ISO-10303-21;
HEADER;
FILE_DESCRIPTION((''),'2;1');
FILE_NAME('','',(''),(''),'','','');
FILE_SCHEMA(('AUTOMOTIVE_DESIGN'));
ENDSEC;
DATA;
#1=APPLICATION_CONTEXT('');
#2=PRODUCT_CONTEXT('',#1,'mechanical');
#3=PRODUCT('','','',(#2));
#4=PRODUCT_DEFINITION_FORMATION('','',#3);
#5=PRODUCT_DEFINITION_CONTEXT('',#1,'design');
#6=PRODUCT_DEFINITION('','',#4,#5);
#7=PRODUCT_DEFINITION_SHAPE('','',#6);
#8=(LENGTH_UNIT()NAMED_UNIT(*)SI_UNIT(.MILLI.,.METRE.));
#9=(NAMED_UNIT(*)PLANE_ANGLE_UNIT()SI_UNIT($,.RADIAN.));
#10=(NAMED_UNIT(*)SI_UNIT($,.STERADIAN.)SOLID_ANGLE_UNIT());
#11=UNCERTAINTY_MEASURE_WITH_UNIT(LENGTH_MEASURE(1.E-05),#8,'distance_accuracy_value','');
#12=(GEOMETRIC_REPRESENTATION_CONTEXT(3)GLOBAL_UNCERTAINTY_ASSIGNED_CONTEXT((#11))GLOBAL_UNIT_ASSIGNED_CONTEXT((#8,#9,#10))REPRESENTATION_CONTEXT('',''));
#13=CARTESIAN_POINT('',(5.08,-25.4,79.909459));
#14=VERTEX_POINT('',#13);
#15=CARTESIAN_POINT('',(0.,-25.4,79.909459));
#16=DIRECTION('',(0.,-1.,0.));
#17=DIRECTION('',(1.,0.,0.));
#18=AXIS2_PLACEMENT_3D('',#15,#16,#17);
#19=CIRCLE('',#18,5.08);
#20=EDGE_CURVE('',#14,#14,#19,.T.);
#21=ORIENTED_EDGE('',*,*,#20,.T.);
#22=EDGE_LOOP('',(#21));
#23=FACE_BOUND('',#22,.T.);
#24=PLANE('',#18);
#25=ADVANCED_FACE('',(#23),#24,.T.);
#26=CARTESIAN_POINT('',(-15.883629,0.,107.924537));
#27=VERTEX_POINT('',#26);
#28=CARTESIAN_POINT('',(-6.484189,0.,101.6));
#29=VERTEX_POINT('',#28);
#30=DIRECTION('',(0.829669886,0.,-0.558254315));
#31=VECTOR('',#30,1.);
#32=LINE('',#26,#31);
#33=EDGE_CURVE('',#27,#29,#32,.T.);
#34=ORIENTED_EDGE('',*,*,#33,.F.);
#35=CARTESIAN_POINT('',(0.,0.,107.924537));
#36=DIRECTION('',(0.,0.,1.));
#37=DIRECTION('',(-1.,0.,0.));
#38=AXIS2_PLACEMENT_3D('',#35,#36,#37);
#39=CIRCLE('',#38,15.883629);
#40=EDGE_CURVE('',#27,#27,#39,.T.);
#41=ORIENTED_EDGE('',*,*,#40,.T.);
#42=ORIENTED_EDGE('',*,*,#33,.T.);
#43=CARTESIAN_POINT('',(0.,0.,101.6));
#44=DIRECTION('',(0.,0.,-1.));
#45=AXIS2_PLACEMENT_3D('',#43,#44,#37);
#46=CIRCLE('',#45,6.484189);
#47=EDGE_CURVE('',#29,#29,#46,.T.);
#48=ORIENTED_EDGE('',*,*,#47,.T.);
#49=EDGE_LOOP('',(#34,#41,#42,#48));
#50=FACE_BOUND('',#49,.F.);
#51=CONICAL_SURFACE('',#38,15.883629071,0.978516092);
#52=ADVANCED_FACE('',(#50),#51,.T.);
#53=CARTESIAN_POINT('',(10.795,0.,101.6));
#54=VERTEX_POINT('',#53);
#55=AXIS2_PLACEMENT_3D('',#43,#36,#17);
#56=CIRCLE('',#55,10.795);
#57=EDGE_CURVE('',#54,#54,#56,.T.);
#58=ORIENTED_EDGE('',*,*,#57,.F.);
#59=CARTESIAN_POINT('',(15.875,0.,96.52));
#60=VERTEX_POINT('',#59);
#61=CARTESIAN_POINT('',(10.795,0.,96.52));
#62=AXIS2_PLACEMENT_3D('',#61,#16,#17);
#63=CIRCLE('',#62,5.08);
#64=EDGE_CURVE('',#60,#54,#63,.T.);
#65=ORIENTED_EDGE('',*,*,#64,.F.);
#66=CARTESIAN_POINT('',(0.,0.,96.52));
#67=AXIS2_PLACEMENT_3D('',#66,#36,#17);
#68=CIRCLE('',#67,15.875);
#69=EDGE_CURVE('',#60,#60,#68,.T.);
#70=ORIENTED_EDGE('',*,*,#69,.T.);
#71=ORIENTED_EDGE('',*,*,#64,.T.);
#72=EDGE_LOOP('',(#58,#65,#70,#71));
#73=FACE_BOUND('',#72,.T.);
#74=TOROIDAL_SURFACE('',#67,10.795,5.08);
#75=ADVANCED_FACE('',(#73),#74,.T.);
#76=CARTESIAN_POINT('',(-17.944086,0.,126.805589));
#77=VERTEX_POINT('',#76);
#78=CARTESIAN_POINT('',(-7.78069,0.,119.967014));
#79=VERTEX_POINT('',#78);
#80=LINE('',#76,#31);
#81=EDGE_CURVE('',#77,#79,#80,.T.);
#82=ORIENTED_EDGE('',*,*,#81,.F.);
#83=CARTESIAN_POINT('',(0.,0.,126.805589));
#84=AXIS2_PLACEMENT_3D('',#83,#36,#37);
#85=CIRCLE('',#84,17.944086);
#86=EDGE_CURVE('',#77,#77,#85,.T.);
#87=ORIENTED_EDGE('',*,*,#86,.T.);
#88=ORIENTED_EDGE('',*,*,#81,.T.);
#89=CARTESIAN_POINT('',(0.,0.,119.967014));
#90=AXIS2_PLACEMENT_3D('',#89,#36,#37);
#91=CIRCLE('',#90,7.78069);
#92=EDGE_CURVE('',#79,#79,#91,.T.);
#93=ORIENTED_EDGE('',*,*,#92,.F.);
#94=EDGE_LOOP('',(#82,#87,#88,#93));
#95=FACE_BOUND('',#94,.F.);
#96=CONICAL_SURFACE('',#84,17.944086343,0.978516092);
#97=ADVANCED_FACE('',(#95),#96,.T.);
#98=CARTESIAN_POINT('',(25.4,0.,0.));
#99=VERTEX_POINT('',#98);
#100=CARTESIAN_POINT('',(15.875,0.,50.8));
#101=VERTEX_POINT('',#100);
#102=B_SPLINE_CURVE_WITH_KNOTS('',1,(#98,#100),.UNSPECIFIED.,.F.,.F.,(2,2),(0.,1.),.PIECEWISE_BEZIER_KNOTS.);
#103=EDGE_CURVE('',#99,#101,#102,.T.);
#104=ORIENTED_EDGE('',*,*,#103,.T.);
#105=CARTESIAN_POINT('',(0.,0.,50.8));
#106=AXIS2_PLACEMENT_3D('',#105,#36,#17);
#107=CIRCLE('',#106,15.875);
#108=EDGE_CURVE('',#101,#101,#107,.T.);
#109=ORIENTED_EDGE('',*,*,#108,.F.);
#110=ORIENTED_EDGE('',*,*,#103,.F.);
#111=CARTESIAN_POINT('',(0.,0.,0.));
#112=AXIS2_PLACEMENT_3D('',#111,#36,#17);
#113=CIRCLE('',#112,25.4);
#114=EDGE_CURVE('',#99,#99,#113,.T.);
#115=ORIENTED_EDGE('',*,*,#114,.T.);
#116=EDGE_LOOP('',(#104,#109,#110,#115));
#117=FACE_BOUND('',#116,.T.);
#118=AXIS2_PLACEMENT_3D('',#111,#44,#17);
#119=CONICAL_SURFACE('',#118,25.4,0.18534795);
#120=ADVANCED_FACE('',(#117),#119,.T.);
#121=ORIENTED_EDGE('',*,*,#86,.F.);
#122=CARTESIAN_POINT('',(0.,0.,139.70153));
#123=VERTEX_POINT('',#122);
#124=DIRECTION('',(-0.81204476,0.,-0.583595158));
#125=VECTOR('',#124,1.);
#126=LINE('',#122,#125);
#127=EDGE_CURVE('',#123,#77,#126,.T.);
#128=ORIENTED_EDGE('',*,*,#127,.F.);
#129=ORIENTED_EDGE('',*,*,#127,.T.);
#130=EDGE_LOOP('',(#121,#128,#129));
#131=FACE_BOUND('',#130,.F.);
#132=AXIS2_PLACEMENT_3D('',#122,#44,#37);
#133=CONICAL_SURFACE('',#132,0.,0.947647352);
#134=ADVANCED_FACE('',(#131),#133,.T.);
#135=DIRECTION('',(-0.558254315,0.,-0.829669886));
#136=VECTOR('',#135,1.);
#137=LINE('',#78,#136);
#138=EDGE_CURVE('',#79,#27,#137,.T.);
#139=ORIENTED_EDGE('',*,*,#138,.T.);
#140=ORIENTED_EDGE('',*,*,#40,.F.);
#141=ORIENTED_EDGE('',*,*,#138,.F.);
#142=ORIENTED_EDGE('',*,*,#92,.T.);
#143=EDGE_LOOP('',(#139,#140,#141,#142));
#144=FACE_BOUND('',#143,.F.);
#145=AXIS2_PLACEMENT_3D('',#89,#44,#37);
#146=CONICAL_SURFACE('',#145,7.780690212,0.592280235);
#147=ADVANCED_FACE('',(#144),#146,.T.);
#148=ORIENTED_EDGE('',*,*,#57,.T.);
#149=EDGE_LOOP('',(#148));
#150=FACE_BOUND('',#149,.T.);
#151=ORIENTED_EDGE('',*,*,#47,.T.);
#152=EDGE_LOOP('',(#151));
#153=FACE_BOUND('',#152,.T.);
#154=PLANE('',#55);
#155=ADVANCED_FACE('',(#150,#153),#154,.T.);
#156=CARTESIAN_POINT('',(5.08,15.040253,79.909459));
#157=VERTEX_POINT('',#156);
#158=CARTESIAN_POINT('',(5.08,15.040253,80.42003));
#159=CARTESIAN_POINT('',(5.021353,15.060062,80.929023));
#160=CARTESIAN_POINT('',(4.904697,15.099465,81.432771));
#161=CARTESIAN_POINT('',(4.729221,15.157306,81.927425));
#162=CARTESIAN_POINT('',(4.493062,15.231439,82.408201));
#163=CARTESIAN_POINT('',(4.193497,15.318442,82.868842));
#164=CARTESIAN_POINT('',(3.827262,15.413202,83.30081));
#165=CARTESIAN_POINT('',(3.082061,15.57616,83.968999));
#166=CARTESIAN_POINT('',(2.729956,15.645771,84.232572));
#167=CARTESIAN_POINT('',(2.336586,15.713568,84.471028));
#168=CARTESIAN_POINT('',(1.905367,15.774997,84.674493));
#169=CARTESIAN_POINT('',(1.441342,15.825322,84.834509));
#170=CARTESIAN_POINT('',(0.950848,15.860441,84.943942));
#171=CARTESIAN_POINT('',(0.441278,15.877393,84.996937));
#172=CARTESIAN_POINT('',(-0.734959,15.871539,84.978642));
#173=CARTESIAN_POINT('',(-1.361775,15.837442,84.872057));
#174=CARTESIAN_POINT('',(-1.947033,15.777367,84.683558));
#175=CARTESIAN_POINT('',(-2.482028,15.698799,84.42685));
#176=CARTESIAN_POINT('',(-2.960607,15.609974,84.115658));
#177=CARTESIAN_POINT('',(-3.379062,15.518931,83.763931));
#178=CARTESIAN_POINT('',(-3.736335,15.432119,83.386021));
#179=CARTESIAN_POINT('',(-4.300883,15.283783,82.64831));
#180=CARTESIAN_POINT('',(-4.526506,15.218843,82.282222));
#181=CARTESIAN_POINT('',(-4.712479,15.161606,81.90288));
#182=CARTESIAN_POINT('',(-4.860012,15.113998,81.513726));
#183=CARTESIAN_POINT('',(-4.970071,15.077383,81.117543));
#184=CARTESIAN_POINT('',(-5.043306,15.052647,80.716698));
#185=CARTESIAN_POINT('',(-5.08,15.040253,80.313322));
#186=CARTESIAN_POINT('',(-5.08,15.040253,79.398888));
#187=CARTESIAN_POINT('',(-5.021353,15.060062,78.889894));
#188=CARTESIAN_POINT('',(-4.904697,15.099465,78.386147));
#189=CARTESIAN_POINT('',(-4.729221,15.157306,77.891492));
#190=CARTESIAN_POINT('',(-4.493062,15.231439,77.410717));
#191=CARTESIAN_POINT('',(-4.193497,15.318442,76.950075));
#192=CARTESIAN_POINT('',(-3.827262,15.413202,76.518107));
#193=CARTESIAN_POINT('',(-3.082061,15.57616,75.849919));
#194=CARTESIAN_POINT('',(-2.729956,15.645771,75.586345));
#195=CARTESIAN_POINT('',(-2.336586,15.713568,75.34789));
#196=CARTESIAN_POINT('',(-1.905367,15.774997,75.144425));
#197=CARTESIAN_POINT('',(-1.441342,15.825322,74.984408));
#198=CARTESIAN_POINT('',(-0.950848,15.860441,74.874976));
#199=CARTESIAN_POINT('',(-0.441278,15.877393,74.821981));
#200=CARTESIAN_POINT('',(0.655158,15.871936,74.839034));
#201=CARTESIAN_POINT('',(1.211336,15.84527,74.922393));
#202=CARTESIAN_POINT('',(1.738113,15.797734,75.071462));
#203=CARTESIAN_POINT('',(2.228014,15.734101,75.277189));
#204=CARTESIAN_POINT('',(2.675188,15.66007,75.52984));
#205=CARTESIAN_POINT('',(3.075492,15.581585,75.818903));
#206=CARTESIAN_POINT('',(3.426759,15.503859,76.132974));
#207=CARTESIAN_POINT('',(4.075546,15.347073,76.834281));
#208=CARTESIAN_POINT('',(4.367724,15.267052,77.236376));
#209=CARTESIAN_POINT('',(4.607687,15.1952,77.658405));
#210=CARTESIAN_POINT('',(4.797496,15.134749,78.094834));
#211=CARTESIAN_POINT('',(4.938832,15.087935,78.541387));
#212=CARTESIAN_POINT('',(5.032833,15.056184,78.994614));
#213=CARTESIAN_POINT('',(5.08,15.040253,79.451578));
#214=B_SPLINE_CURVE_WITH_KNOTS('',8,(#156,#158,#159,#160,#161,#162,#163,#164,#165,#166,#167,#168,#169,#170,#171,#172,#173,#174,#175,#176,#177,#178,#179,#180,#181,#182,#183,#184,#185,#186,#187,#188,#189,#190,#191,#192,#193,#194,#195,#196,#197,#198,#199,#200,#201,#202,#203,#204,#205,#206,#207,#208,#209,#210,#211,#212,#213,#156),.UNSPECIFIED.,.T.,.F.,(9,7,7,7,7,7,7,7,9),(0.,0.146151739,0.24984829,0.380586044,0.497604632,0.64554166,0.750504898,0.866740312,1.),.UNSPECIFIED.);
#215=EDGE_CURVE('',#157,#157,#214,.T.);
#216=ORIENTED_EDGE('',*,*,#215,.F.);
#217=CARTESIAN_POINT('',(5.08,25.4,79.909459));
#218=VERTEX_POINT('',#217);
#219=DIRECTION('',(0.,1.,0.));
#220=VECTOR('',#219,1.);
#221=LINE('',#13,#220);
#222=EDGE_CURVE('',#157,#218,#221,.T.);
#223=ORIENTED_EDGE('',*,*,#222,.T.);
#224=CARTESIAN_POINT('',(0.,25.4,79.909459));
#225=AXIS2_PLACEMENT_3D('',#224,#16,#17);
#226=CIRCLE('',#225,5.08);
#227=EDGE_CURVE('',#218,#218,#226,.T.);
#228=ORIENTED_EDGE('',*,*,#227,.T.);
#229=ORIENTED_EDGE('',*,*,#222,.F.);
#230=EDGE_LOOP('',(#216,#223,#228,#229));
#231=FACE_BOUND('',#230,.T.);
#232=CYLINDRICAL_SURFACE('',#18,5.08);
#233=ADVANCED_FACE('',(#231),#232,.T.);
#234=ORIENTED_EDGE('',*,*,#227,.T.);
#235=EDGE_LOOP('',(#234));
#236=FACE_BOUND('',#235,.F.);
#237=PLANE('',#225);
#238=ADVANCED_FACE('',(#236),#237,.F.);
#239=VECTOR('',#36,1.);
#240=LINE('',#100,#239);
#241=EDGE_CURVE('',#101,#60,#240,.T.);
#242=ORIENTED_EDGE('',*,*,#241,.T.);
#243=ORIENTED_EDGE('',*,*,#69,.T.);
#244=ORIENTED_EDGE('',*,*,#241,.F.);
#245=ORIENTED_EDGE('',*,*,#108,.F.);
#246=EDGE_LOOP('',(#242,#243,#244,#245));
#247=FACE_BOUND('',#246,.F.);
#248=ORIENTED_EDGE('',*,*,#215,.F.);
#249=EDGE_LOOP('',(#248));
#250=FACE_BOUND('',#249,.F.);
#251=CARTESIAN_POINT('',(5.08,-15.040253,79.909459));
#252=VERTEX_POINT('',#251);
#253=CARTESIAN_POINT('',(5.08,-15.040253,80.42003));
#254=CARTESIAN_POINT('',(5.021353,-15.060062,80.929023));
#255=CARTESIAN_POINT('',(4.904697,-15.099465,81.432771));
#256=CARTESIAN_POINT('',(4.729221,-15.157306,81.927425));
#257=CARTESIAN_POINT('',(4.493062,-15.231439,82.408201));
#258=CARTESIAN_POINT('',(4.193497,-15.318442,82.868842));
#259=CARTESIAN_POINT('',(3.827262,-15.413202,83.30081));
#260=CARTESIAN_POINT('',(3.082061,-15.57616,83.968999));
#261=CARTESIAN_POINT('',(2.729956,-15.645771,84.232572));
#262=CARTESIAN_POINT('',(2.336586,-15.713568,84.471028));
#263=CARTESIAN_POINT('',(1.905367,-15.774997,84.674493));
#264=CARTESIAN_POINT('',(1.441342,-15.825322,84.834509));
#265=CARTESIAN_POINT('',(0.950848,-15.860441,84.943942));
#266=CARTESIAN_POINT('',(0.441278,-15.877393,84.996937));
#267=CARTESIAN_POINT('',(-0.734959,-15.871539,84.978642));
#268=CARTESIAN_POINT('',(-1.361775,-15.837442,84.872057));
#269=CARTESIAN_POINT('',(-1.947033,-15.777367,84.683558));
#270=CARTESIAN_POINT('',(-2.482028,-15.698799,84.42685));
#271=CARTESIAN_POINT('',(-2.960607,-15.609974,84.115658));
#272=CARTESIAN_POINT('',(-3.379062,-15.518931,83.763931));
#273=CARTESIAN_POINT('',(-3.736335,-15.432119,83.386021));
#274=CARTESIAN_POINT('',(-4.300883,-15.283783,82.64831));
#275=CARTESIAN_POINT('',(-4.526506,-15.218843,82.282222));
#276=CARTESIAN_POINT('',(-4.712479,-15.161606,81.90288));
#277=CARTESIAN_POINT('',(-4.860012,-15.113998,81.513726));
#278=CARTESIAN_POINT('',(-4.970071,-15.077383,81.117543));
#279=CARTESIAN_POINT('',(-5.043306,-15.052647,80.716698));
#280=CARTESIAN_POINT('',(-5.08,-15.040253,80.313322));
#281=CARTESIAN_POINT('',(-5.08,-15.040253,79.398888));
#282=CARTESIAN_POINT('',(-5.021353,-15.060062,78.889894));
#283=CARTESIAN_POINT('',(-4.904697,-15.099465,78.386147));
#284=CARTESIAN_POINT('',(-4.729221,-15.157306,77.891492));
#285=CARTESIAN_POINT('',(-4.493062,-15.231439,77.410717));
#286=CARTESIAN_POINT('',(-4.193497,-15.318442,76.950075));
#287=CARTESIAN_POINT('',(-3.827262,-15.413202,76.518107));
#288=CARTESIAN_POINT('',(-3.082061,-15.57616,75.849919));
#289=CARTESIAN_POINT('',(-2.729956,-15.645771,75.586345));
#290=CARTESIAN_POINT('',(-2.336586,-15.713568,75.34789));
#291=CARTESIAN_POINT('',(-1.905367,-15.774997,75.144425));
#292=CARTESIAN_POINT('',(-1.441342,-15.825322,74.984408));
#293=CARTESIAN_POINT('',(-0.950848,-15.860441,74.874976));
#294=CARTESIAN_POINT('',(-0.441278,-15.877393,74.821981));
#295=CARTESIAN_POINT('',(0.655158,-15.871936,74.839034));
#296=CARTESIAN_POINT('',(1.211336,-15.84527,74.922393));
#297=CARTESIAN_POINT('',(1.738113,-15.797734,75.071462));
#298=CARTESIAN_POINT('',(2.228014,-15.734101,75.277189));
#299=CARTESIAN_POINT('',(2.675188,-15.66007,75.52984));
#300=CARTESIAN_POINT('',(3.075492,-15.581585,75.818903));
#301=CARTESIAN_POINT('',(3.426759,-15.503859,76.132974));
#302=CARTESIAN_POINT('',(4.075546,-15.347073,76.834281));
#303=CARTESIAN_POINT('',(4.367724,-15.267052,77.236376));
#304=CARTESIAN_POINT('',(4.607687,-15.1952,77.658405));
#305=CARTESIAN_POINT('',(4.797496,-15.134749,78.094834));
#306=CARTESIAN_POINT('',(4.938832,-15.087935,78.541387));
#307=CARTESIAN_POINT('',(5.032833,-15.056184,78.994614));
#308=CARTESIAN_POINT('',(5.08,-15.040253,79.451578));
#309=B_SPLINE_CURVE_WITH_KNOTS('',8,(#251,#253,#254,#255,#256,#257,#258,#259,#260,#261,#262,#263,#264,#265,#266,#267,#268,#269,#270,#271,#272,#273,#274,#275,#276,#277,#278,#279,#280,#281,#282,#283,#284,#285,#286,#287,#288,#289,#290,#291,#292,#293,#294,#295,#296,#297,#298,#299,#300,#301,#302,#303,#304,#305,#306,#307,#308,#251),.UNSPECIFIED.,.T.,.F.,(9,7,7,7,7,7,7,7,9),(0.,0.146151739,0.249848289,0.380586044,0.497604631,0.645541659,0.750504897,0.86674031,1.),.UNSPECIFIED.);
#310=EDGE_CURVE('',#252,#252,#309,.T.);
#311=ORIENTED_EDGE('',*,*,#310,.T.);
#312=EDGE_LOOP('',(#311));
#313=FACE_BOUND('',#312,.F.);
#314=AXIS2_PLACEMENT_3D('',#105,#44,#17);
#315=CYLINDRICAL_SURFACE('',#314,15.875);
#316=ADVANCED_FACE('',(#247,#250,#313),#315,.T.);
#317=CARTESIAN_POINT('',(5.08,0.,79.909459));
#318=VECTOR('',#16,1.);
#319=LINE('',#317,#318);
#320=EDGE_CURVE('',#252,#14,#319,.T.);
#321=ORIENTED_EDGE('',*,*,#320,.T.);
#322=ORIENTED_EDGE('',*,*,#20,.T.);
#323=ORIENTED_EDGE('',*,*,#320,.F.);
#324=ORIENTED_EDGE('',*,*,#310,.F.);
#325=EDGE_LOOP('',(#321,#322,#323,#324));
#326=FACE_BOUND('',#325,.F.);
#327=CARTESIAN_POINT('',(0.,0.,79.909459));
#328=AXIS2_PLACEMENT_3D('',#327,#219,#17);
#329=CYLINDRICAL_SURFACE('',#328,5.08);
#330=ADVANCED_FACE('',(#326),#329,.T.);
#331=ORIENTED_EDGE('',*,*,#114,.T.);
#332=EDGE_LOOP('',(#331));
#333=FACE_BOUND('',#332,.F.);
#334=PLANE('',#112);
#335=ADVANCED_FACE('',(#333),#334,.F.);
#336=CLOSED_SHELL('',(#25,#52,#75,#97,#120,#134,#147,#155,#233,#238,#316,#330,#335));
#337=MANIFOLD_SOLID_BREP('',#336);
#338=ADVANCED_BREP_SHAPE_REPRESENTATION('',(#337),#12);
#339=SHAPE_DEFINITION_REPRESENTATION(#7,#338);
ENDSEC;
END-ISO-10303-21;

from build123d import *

# Parameters (mm, degrees)
F0_R     = 25.4
F2_R     = 15.875
F4_R     = 15.875
F5_DEPTH = 50.8
F6_R     = 5.08
F7_DEPTH = 25.4
F8_DEPTH = 50.8
F9_R     = 5.08


with BuildPart() as f3:
    # F0 (on Top) → F3 section 0
    with BuildSketch(Plane.XY):
        Circle(F0_R)
    # F2 (on offset) → F3 section 1
    with BuildSketch(Plane.XY.offset(50.8)):
        Circle(F2_R)
    loft()

    # F4 (on face) → F5 (join)
    with BuildSketch(Plane.XY.offset(50.8)):
        Circle(F4_R)
    extrude(amount=F5_DEPTH)

    # F6 (on Front) → F7 (join)
    with BuildSketch(Plane.XZ):
        with Locations((0, 79.9094587564)):
            Circle(F6_R)
    extrude(amount=F7_DEPTH)

    # F8 (add): a face of the model
    f8_faces = [f3.faces().sort_by_distance(p)[0] for p in [
        (0, -25.4, 79.9094587564),
    ]]
    extrude(f8_faces, amount=-F8_DEPTH)

    # F9
    f9_edges = [f3.edges().sort_by_distance(p)[0] for p in [
        (-15.875, 0, 101.6),
    ]]
    fillet(f9_edges, radius=F9_R)

    # F10 (on Front) → F11 (revolve)
    with BuildSketch(Plane.XZ):
        Polygon((-15.8836290712, 107.9245372937), (0, 97.2370281816), (0, 139.7015303373), (-17.9440863431, 126.805588603), (-7.7806902118, 119.9670135975), align=None)
    revolve(axis=Axis((0, 0, 69.8507651687), (0, 0, 1)))


solid = f3.part
